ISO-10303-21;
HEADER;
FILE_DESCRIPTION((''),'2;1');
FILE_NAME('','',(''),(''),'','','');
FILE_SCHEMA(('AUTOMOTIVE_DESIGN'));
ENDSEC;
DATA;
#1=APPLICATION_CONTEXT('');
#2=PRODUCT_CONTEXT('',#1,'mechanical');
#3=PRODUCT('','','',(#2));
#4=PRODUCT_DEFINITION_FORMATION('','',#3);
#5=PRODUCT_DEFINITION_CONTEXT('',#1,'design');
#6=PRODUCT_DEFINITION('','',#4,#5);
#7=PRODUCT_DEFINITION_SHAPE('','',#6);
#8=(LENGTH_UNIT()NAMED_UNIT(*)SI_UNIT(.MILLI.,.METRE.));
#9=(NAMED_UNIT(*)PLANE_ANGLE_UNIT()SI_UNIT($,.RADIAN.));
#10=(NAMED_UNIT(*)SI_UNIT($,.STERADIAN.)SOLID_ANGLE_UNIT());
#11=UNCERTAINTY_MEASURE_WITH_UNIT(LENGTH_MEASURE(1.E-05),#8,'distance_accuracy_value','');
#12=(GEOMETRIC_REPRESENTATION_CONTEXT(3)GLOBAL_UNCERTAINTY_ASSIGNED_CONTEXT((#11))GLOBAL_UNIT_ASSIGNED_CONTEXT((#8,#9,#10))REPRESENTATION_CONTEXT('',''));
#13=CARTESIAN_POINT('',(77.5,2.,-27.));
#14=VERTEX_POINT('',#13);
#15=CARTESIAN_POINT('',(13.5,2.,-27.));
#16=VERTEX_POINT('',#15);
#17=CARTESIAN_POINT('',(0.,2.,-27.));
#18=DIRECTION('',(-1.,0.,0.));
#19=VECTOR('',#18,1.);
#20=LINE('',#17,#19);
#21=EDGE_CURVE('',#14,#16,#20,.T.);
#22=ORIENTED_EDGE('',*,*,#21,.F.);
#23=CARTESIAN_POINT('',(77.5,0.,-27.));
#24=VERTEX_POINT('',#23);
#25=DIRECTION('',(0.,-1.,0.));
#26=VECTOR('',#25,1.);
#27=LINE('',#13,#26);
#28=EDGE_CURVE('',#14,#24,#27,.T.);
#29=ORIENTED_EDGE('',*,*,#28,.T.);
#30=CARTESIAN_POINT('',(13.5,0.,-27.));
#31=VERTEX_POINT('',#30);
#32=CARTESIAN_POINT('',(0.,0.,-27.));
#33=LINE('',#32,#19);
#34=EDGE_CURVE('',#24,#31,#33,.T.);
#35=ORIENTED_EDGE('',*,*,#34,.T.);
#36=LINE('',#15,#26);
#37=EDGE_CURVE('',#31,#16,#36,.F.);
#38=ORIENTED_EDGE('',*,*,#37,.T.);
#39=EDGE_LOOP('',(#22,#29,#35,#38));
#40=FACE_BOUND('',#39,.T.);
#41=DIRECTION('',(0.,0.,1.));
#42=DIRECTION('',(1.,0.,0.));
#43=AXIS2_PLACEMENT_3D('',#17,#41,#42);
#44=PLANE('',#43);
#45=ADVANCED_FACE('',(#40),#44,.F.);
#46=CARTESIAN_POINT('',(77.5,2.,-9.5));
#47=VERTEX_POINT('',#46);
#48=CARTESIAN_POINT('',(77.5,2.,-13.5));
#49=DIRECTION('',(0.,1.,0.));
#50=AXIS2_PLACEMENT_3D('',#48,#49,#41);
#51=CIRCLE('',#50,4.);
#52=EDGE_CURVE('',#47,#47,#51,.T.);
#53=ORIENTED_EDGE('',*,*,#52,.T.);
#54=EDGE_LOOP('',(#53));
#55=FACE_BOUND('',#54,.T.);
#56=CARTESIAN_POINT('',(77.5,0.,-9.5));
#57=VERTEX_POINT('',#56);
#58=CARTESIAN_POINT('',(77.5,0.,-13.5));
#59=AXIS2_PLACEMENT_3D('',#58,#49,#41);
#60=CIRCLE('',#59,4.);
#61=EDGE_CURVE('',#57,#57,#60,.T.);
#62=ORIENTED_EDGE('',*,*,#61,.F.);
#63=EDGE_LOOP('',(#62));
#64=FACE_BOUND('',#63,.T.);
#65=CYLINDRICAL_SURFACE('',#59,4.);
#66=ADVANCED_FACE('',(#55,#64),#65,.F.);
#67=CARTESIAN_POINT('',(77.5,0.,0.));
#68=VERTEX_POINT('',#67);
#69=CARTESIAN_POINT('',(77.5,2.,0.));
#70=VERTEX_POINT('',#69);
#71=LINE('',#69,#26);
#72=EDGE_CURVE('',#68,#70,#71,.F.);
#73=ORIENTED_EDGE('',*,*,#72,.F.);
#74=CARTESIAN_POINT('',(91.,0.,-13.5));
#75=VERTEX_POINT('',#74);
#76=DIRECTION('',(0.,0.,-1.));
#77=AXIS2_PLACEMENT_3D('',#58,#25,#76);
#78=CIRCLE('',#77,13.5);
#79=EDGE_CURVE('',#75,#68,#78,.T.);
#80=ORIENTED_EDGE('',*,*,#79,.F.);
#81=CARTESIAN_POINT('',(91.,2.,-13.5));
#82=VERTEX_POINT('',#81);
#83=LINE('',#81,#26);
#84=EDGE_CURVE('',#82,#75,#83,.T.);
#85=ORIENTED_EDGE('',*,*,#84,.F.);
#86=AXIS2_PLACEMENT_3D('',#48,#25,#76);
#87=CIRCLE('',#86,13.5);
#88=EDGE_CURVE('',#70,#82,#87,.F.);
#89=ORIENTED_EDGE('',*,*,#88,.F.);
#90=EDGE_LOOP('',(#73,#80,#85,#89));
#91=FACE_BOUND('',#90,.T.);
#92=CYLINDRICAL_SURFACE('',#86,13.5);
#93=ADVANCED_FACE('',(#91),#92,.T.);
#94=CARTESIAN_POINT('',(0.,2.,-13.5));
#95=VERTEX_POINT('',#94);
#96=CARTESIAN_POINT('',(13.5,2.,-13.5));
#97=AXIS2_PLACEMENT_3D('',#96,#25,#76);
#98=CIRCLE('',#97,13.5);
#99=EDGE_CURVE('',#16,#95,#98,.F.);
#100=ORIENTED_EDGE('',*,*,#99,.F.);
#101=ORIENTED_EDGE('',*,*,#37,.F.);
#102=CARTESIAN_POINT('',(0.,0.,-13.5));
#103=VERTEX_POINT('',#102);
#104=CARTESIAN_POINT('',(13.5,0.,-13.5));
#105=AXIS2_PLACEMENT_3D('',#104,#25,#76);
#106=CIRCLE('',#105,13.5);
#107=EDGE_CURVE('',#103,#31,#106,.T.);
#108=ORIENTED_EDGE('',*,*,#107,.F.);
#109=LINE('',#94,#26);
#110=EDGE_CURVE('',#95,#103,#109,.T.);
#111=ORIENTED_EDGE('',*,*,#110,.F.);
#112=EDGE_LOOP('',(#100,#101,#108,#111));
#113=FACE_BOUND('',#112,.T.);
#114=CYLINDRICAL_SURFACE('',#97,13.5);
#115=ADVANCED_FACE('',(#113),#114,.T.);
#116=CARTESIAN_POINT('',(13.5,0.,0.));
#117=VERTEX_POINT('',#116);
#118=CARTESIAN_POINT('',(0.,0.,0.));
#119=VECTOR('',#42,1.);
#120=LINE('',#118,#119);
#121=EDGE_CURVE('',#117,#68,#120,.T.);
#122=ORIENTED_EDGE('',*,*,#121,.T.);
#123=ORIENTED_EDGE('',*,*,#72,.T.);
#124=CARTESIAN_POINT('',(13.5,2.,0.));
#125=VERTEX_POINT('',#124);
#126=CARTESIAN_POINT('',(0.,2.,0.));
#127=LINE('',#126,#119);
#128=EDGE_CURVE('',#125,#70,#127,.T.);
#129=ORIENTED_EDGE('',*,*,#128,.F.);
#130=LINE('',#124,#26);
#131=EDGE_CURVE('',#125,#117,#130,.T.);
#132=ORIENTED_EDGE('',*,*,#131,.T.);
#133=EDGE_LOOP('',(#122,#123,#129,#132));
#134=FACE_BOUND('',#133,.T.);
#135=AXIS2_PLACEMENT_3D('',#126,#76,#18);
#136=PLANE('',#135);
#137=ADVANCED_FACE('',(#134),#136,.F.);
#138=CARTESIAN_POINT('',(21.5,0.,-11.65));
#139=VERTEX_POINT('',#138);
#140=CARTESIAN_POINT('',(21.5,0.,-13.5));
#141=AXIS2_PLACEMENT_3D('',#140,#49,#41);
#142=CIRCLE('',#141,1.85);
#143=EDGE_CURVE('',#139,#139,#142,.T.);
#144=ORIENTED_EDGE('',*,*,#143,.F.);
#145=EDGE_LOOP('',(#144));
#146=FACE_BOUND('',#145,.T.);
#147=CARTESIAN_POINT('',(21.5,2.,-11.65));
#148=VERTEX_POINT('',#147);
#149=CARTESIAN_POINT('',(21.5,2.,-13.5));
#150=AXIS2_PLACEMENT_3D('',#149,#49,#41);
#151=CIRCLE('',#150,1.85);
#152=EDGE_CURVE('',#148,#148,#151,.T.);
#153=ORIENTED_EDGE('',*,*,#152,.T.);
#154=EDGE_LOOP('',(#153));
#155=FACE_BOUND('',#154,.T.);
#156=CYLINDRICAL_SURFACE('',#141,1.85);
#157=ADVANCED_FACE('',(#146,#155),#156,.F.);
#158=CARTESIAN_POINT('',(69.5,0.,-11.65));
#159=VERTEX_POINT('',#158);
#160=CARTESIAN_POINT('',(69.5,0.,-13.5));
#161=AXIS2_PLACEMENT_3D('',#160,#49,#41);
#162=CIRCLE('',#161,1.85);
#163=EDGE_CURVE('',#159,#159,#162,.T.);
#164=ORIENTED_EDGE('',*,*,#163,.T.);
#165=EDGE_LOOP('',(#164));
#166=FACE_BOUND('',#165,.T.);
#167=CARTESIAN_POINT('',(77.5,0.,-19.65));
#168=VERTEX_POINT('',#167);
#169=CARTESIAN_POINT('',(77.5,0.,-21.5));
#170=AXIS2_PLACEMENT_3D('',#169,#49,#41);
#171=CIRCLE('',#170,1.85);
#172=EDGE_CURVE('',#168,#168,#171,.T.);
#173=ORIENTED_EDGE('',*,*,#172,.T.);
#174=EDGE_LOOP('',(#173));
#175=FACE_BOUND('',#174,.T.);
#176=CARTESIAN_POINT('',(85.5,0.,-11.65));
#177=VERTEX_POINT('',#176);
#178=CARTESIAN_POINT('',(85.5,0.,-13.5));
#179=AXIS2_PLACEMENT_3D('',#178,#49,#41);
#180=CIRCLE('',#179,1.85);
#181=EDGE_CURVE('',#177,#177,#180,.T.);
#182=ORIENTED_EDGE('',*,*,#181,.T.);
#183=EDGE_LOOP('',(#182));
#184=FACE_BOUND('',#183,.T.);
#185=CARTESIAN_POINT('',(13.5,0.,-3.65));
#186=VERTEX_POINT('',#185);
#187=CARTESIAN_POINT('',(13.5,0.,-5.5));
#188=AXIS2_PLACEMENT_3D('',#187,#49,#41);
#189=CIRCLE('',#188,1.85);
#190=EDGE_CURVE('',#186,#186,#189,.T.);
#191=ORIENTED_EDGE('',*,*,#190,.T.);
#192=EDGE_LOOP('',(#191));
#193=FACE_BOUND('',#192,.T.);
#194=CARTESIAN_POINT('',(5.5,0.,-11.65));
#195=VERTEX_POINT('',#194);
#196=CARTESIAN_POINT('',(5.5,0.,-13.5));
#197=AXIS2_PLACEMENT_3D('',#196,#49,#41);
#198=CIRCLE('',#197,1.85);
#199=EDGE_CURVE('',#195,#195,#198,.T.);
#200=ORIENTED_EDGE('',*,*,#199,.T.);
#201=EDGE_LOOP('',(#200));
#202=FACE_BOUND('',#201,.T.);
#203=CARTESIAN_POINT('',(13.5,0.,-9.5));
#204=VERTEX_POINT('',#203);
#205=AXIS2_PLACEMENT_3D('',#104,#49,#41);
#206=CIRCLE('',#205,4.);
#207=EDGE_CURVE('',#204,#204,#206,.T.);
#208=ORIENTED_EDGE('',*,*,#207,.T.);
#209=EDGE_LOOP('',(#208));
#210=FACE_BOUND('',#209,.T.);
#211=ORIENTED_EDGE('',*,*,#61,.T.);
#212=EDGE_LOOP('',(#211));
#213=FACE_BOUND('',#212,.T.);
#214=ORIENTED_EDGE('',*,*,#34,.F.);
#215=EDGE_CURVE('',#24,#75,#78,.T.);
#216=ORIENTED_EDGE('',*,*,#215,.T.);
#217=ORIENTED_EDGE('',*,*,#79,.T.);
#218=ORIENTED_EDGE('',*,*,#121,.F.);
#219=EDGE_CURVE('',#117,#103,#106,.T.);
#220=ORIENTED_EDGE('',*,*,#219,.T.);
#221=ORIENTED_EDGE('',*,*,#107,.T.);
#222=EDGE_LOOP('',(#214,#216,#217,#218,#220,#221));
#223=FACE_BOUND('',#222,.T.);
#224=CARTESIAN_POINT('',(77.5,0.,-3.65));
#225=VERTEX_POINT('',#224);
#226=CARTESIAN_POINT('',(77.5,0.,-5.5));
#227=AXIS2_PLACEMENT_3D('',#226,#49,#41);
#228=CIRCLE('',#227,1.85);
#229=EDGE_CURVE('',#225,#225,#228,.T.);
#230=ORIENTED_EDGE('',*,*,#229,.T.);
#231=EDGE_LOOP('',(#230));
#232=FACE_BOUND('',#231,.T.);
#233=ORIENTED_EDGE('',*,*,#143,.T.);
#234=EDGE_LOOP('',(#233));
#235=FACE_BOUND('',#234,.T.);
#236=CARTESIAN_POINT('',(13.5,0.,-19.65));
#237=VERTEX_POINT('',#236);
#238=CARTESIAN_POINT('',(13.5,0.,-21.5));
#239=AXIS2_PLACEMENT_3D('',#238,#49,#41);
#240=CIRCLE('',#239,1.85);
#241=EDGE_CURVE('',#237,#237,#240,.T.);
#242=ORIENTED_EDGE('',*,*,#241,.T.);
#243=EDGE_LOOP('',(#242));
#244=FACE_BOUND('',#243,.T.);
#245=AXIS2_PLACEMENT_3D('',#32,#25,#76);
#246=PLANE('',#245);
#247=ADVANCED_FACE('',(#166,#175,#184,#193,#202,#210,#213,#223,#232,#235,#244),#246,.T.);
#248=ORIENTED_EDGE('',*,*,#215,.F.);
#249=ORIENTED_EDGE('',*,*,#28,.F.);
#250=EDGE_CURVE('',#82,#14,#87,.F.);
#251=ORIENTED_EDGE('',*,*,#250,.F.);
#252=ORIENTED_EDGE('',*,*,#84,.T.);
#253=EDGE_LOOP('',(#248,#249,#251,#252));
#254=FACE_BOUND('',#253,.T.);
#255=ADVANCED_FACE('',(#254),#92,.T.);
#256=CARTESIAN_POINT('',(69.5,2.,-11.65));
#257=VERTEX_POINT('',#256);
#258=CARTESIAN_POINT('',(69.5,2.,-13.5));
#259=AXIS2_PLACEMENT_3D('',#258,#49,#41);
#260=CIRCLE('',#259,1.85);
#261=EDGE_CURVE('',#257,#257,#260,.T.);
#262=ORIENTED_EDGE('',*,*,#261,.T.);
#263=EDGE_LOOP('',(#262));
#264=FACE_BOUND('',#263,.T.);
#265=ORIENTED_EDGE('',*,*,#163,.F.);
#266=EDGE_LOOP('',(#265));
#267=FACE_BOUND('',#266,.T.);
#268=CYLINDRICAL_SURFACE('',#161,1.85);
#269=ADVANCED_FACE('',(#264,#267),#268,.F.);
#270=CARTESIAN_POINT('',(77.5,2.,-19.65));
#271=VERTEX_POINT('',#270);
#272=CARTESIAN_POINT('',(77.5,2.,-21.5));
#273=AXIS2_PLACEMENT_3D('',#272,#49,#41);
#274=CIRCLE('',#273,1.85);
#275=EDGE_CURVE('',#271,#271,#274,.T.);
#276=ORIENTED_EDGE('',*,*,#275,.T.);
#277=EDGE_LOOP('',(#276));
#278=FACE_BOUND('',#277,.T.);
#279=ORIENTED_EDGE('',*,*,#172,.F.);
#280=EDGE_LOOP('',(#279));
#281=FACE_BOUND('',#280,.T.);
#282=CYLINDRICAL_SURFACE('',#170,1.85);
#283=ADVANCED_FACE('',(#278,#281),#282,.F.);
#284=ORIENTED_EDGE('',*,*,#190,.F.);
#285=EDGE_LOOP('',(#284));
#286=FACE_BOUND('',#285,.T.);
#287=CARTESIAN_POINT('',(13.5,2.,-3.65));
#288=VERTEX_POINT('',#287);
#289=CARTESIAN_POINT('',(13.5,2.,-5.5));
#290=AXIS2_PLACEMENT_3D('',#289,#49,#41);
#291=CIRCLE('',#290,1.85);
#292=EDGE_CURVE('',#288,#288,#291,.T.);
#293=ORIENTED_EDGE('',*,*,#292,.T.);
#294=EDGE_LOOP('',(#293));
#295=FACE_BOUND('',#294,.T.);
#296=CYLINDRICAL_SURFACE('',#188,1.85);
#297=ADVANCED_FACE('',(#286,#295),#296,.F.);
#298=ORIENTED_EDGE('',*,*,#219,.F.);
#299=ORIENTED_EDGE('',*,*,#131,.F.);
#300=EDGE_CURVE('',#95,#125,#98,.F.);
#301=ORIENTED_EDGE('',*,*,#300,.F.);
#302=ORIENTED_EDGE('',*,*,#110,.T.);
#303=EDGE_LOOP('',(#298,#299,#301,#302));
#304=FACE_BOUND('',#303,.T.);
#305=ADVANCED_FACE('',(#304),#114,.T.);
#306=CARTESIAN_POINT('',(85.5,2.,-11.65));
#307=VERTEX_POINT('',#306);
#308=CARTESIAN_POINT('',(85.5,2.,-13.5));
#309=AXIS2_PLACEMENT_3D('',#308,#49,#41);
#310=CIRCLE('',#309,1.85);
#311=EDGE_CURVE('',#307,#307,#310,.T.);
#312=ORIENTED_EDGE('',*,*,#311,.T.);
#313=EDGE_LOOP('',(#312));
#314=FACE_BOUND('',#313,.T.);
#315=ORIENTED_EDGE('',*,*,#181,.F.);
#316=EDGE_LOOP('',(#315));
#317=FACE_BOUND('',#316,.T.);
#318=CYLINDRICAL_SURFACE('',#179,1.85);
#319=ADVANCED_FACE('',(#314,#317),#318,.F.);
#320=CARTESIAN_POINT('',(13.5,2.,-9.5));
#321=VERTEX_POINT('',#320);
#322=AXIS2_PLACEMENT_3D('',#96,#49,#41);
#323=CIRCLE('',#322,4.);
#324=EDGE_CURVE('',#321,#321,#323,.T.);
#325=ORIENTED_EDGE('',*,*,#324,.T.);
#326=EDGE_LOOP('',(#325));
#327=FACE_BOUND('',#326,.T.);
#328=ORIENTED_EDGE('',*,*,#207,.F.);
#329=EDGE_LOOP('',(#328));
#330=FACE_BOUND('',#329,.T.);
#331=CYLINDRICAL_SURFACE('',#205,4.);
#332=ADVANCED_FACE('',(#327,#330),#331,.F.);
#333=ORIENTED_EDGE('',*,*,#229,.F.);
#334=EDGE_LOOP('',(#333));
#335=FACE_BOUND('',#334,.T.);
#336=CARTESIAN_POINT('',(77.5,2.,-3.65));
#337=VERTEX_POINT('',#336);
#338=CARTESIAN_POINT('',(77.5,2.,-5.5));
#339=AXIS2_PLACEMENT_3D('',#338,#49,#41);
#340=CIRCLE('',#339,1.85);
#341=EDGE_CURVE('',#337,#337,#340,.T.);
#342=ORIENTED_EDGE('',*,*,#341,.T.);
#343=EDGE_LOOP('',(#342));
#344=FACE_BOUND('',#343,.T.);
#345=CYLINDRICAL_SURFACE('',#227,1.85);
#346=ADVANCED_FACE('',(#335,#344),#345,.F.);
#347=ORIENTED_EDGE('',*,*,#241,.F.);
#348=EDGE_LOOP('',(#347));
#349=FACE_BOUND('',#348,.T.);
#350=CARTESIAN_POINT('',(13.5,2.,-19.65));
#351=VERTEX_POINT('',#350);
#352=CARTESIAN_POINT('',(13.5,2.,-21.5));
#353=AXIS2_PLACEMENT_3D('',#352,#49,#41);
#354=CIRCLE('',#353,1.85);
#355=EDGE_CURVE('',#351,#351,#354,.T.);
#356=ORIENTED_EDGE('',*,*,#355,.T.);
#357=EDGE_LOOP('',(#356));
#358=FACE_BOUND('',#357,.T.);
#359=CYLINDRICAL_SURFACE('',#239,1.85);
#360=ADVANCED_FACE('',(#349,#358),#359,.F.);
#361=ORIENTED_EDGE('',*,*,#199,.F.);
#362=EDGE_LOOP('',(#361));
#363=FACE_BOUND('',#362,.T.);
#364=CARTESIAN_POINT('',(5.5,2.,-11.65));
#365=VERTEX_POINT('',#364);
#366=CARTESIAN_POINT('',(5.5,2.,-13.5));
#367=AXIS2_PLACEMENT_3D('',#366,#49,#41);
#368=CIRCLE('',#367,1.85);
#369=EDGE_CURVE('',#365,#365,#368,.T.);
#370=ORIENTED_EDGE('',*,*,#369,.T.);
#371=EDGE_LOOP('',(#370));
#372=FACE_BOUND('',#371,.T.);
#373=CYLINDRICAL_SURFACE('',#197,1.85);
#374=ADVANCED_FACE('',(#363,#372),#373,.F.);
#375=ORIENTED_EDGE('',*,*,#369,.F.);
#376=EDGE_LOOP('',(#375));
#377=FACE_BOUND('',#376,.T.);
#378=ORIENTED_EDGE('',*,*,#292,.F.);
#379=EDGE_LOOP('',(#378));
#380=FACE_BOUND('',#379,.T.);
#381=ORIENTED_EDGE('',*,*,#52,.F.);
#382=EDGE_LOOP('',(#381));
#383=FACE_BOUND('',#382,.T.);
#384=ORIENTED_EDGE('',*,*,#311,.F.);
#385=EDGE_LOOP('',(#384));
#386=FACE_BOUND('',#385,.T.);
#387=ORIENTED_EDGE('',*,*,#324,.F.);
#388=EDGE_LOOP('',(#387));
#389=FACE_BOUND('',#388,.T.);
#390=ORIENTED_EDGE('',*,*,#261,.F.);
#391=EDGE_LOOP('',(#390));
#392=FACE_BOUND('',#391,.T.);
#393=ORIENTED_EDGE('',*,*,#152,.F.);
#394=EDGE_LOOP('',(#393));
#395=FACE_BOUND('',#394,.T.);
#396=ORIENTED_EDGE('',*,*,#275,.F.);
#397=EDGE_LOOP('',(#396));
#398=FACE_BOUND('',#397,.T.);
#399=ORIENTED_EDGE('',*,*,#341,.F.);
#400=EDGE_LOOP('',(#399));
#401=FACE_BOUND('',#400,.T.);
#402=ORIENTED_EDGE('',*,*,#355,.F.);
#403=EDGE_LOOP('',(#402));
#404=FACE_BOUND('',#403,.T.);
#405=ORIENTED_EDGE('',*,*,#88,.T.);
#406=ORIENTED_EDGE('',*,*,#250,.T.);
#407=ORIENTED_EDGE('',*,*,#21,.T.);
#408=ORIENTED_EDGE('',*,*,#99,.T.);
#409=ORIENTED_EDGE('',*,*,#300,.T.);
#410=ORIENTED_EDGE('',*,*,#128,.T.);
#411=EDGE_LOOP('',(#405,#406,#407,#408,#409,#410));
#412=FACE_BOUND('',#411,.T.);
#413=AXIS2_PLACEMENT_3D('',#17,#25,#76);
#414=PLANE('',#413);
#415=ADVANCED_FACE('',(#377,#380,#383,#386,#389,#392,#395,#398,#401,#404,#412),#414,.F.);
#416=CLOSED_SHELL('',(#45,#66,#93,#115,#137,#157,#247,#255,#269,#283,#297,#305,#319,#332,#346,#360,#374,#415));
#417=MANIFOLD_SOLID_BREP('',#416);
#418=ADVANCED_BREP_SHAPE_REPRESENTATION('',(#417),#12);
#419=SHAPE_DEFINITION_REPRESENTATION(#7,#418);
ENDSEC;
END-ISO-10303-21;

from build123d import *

# Parameters (mm, degrees)
SKETCH1_W                = 91
SKETCH1_H                = 27
EXTRUDE1_DEPTH           = 2
CUT_EXTRUDE1_START       = -2
CUT_EXTRUDE1_OUTLINE_R   = 4
CUT_EXTRUDE1_OUTLINE_R_2 = 1.85
CUT_EXTRUDE1_DEPTH       = 2
FILLET1_R                = 13.5
FILLET2_R                = 13.5
FILLET3_R                = 13.5
FILLET4_R                = 13.5


# Read off the part's stored shape, not the designer's step: Cut-Extrude1
with BuildPart() as part:
    # Sketch1 → Extrude1 (new body)
    with BuildSketch(Plane(origin=(0, 0, 0), x_dir=(1, 0, 0), z_dir=(0, 1, 0))):
        with Locations((45.5, 13.5)):
            Rectangle(SKETCH1_W, SKETCH1_H)
    extrude(amount=EXTRUDE1_DEPTH)

    # Cut-Extrude1 outline → Cut-Extrude1 (cut)
    with BuildSketch(Plane(origin=(0, 2, 0), x_dir=(1, 0, 0), z_dir=(0, 1, 0)).offset(CUT_EXTRUDE1_START)):
        with Locations((13.5, 13.5)):
            Circle(CUT_EXTRUDE1_OUTLINE_R)
        with Locations((21.5, 13.5)):
            Circle(CUT_EXTRUDE1_OUTLINE_R_2)
        with Locations((5.5, 13.5)):
            Circle(CUT_EXTRUDE1_OUTLINE_R_2)
        with Locations((13.5, 5.5)):
            Circle(CUT_EXTRUDE1_OUTLINE_R_2)
        with Locations((13.5, 21.5)):
            Circle(CUT_EXTRUDE1_OUTLINE_R_2)
        with Locations((77.5, 13.5)):
            Circle(CUT_EXTRUDE1_OUTLINE_R)
        with Locations((85.5, 13.5)):
            Circle(CUT_EXTRUDE1_OUTLINE_R_2)
        with Locations((69.5, 13.5)):
            Circle(CUT_EXTRUDE1_OUTLINE_R_2)
        with Locations((77.5, 5.5)):
            Circle(CUT_EXTRUDE1_OUTLINE_R_2)
        with Locations((77.5, 21.5)):
            Circle(CUT_EXTRUDE1_OUTLINE_R_2)
    extrude(amount=CUT_EXTRUDE1_DEPTH, mode=Mode.SUBTRACT)

    # Fillet1
    fillet1_edges = [part.edges().sort_by_distance(p)[0] for p in [
        (91, 1, 0),
    ]]
    fillet(fillet1_edges, radius=FILLET1_R)

    # Fillet2
    fillet2_edges = [part.edges().sort_by_distance(p)[0] for p in [
        (91, 1, -27),
    ]]
    fillet(fillet2_edges, radius=FILLET2_R - 0.0001)  # a hair under: the kernel refuses the full size

    # Fillet3
    fillet3_edges = [part.edges().sort_by_distance(p)[0] for p in [
        (0, 1, -27),
    ]]
    fillet(fillet3_edges, radius=FILLET3_R)

    # Fillet4
    fillet4_edges = [part.edges().sort_by_distance(p)[0] for p in [
        (0, 1, 0),
    ]]
    fillet(fillet4_edges, radius=FILLET4_R - 0.0001)  # a hair under: the kernel refuses the full size


solid = part.part
